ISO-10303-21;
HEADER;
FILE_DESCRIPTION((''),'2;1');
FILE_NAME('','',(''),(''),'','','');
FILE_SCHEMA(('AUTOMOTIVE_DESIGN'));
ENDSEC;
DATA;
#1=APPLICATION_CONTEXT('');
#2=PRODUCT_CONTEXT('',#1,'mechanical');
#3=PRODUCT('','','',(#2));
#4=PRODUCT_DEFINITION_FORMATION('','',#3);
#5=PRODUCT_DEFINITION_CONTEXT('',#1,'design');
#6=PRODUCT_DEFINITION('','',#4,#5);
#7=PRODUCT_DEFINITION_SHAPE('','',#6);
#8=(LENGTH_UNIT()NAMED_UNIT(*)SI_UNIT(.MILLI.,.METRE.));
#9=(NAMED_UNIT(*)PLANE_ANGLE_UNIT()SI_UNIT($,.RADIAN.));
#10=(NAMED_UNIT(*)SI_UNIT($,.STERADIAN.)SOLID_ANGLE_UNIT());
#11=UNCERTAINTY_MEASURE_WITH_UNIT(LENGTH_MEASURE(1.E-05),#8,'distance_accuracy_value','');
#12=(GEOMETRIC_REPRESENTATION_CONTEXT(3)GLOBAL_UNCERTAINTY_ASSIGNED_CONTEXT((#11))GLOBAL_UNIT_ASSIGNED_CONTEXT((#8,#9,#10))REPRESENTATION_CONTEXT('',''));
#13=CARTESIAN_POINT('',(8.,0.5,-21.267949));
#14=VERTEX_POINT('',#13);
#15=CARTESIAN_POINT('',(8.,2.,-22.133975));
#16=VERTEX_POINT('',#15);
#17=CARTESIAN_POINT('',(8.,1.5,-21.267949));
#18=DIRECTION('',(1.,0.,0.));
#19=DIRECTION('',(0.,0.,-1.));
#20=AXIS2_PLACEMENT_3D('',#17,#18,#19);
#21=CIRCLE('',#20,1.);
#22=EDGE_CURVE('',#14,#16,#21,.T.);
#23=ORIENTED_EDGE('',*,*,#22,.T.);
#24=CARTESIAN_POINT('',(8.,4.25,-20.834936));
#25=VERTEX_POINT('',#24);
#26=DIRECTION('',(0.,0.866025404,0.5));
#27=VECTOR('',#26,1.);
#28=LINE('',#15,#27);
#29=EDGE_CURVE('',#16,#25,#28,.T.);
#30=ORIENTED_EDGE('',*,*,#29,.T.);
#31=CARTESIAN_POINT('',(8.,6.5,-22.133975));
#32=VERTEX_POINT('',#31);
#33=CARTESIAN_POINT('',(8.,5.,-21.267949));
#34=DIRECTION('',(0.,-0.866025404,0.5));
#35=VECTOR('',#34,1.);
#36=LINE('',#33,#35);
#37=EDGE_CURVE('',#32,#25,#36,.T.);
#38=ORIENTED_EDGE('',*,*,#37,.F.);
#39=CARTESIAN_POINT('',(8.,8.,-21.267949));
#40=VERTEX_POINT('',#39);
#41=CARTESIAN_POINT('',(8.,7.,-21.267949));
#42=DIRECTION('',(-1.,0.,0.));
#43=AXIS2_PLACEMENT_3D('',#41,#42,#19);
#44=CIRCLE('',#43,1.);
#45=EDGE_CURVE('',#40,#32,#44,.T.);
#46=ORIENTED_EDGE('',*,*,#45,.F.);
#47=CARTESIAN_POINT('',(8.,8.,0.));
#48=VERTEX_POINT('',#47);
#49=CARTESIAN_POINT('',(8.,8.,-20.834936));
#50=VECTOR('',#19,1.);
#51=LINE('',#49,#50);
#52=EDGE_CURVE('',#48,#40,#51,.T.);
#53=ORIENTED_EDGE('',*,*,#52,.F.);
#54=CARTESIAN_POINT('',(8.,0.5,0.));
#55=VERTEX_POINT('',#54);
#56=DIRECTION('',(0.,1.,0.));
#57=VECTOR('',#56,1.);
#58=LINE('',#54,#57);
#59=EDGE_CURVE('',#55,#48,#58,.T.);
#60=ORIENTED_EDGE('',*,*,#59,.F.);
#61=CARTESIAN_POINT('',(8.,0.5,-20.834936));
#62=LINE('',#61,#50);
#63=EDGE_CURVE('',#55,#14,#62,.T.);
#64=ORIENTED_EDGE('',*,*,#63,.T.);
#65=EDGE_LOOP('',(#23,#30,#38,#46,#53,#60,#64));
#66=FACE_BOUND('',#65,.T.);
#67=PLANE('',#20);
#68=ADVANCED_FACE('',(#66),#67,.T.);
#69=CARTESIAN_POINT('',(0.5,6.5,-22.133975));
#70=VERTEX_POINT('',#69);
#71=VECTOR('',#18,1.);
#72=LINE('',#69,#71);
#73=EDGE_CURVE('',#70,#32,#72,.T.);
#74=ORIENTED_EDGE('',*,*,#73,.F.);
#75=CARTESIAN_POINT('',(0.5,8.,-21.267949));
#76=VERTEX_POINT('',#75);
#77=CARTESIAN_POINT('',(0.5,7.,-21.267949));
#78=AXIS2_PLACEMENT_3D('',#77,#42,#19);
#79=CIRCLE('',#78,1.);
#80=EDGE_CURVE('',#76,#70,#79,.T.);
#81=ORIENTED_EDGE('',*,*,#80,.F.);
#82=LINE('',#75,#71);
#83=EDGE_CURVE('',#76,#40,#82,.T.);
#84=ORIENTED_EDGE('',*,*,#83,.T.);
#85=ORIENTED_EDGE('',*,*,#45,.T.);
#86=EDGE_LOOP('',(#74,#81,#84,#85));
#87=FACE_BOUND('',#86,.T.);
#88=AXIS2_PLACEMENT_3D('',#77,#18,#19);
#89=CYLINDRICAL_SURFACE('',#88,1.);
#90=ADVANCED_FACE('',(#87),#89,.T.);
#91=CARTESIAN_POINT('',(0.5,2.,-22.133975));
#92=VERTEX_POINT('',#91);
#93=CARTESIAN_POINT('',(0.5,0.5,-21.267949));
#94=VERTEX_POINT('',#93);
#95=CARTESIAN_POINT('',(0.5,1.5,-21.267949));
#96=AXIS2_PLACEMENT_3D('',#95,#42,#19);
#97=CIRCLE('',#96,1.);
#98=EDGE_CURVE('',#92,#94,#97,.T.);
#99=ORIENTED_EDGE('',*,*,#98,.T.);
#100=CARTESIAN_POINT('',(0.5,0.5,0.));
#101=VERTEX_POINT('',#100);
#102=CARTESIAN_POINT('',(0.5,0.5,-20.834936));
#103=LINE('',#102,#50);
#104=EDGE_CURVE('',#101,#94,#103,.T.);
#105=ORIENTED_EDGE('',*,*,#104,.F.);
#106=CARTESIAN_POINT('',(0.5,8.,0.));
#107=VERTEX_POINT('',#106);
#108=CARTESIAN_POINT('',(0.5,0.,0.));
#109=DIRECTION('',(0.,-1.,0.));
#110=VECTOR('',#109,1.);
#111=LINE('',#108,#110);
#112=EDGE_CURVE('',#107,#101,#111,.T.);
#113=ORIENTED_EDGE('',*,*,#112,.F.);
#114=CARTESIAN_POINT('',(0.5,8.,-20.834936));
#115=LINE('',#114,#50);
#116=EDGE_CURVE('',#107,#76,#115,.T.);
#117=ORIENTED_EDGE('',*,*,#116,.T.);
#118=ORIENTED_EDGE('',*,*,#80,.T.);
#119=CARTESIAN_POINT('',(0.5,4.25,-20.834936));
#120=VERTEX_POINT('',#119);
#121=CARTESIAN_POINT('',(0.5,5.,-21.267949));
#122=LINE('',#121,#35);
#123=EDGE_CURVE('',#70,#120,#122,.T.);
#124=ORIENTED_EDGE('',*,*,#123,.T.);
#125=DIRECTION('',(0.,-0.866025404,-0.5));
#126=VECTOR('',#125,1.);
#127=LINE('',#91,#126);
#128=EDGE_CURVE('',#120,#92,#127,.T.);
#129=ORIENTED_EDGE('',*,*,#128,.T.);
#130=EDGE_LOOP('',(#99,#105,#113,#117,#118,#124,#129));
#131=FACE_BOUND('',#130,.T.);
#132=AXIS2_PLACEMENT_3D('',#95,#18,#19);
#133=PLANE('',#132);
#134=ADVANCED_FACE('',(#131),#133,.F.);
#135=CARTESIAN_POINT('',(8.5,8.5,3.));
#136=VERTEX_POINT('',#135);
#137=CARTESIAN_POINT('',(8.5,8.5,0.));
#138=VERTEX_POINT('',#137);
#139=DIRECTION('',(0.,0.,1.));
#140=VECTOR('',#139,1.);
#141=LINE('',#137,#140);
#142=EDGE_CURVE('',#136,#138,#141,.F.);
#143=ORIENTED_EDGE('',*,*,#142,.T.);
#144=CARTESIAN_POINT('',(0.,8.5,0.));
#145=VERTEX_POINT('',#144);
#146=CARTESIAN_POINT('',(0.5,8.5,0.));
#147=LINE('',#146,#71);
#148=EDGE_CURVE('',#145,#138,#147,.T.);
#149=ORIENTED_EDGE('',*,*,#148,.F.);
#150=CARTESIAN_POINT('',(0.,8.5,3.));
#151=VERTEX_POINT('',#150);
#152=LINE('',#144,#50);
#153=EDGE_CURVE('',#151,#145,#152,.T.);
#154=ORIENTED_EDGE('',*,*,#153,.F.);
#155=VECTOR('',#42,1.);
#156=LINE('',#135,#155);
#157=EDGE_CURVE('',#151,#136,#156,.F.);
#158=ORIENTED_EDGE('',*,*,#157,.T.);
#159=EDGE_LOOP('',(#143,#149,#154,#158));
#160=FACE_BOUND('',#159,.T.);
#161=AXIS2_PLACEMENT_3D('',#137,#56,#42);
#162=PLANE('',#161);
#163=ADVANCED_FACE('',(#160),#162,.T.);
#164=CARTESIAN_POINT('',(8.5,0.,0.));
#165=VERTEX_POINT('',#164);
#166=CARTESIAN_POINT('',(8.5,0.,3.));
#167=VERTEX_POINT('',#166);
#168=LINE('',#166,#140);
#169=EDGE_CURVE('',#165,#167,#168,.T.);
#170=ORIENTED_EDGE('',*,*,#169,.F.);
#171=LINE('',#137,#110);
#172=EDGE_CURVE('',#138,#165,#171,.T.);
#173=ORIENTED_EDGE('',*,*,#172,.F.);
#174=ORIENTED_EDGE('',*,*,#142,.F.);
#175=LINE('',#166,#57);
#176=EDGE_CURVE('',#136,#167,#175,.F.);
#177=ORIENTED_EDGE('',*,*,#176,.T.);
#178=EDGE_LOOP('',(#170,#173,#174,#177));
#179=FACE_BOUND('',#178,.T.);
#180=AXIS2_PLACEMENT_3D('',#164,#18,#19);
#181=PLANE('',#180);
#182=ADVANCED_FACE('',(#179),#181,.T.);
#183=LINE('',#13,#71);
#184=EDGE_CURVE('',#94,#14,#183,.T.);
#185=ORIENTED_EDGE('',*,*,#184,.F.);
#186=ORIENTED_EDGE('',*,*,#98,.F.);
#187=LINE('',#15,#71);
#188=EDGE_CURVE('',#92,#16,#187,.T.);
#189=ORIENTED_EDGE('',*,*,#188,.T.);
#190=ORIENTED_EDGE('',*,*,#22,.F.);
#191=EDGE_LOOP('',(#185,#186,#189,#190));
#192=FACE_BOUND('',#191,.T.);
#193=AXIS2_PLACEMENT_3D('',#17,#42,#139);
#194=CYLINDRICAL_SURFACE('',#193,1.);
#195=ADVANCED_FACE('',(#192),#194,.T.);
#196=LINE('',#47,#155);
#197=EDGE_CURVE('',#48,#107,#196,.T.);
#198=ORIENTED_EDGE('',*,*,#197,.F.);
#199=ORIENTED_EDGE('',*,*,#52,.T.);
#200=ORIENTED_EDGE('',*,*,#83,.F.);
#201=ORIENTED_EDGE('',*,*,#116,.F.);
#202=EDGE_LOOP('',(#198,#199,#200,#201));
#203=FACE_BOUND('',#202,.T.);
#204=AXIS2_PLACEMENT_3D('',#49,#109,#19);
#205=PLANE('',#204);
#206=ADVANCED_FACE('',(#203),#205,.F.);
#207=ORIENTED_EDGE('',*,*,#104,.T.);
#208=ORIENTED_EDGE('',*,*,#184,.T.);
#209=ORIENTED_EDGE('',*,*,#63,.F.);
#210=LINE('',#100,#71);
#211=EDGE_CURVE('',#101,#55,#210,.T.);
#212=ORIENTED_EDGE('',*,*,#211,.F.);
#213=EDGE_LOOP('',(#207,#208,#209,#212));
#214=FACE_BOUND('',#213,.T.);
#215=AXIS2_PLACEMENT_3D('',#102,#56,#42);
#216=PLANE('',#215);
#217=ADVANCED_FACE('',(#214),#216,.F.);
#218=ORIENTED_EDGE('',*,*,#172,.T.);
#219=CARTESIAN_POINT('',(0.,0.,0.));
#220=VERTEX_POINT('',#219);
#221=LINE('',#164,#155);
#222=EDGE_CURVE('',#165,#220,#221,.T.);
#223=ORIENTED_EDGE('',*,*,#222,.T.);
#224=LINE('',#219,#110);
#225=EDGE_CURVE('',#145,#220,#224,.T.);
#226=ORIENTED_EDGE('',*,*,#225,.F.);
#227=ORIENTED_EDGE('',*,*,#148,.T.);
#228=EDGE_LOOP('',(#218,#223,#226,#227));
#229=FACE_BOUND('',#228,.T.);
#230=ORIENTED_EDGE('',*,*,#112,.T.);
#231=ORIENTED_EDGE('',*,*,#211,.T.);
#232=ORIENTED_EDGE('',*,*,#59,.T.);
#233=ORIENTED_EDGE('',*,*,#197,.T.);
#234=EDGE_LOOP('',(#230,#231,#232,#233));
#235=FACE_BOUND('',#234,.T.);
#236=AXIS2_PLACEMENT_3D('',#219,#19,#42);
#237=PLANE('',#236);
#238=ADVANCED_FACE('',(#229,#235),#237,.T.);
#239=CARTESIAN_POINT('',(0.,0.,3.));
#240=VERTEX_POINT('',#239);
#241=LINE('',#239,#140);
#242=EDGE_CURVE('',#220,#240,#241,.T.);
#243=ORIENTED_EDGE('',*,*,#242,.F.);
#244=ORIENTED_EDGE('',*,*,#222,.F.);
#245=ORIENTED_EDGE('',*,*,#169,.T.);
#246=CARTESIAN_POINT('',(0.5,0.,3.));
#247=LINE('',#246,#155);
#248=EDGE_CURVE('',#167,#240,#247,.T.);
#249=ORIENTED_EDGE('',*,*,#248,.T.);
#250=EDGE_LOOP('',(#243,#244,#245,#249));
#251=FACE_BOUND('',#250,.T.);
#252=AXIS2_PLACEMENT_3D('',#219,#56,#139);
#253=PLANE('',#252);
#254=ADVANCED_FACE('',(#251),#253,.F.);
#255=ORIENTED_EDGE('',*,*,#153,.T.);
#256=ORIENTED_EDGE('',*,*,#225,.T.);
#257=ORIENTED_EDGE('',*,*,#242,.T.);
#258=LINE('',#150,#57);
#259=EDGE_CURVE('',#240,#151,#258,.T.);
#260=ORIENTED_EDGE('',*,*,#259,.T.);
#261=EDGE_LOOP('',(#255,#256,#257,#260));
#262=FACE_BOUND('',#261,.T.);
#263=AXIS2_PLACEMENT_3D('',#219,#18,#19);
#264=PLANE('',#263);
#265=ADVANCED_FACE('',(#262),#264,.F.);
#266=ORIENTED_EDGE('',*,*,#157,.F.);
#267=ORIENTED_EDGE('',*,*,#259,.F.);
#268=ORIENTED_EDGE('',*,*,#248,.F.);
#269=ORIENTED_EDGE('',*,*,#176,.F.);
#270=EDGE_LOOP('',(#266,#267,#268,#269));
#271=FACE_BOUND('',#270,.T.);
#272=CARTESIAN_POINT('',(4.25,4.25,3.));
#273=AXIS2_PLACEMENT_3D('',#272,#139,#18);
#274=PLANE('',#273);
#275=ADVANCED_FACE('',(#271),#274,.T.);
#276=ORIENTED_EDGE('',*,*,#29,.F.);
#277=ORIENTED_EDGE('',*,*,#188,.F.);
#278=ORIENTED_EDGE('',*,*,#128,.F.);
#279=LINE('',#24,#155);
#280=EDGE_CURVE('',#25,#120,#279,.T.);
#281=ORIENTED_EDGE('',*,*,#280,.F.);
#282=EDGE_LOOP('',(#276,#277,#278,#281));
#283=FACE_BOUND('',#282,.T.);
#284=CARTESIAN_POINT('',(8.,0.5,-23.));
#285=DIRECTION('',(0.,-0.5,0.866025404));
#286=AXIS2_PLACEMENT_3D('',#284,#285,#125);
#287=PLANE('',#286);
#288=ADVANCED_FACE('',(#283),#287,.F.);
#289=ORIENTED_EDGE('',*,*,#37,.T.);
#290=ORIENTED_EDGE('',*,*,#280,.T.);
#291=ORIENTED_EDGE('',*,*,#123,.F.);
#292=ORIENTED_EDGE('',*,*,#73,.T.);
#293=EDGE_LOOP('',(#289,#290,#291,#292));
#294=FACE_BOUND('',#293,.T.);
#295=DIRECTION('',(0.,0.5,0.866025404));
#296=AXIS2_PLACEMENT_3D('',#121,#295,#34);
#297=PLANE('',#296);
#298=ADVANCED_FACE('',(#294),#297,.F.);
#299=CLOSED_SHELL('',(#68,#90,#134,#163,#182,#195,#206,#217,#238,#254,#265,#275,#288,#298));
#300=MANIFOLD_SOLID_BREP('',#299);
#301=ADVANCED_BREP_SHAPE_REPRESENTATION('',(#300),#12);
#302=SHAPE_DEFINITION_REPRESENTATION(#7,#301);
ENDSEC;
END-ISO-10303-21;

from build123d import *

# Parameters (mm, degrees)
BOSS_EXTRUDE1_START   = -0.5
BOSS_EXTRUDE1_DEPTH   = 8
BOSS_EXTRUDE1_2_DEPTH = 7.5
CUT_EXTRUDE1_DEPTH    = 0.5
SKETCH3_W             = 8
SKETCH3_H             = 24.267949192
BOSS_EXTRUDE2_DEPTH   = 0.5
CUT_EXTRUDE2_DEPTH    = 7.5
CUT_EXTRUDE3_DEPTH    = 0.433012702
CUT_EXTRUDE4_DEPTH    = 20.834936491
SKETCH7_W             = 3
SKETCH7_H             = 8.5
BOSS_EXTRUDE3_DEPTH   = 0.5


with BuildPart() as part:
    # Boss-Extrude1: read off the stored shape, not the designer's step
    # Boss-Extrude1 outline → Boss-Extrude1 (new body)
    with BuildSketch(Plane.ZY.offset(-8).offset(BOSS_EXTRUDE1_START)):
        with BuildLine():
            Line((-21.267949192, 8.5), (-21.267949192, 3.5))
            Line((-21.267949192, 3.5), (-22.133974596, 2))
            ThreePointArc((-22.133974596, 2), (-22.133974596, 1), (-21.267949192, 0.5))
            Line((-21.267949192, 0.5), (3, 0.5))
            Line((3, 0.5), (3, 8.5))
            Line((3, 8.5), (-21.267949192, 8.5))
        make_face()
    extrude(amount=BOSS_EXTRUDE1_DEPTH)

    # Boss-Extrude1 2 outline → Boss-Extrude1 2 (add)
    with BuildSketch(Plane.ZY.offset(-8)):
        with BuildLine():
            Line((-22.133974596, 6.5), (-21.267949192, 5))
            Line((-21.267949192, 5), (-21.267949192, 8))
            ThreePointArc((-21.267949192, 8), (-22.133974596, 7.5), (-22.133974596, 6.5))
        make_face()
    extrude(amount=BOSS_EXTRUDE1_2_DEPTH)

    # Sketch2 → Cut-Extrude1 (cut)
    with BuildSketch(Plane(origin=(8.5, 0, 0), x_dir=(0, 0, -1), z_dir=(1, 0, 0))):
        with BuildLine():
            Line((22.133974596, 2), (21.267949192, 3.5))
            Line((21.267949192, 3.5), (21.267949192, 0.5))
            ThreePointArc((21.267949192, 0.5), (22.133974596, 1), (22.133974596, 2))
        make_face()
    extrude(amount=-CUT_EXTRUDE1_DEPTH, mode=Mode.SUBTRACT)

    # Sketch3 → Boss-Extrude2 (add)
    with BuildSketch(Plane.XZ.offset(-0.5)):
        with Locations((4.5, -9.133974596)):
            Rectangle(SKETCH3_W, SKETCH3_H)
    extrude(amount=BOSS_EXTRUDE2_DEPTH)

    # Sketch4 → Cut-Extrude2 (cut)
    with BuildSketch(Plane.ZY.offset(-0.5)):
        Polygon((-21.267949192, 3.5), (-20.834936491, 4.25), (-21.267949192, 5), align=None)
    extrude(amount=-CUT_EXTRUDE2_DEPTH, mode=Mode.SUBTRACT)

    # Sketch5 → Cut-Extrude3 (cut)
    with BuildSketch(Plane(origin=(0, 0, -21.267949192), x_dir=(-1, 0, 0), z_dir=(0, 0, -1))):
        Polygon((-0.5, 8), (-0.5, 8.5), (-8.5, 8.5), (-8.5, 0), (-0.5, 0), (-0.5, 0.5), (-8, 0.5), (-8, 4.25), (-8, 8), align=None)
    extrude(amount=-CUT_EXTRUDE3_DEPTH, mode=Mode.SUBTRACT)

    # Sketch6 → Cut-Extrude4 (cut)
    with BuildSketch(Plane(origin=(0, 0, -20.834936491), x_dir=(-1, 0, 0), z_dir=(0, 0, -1))):
        Polygon((-0.5, 8), (-0.5, 8.5), (-8.5, 8.5), (-8.5, 0), (-0.5, 0), (-0.5, 0.5), (-8, 0.5), (-8, 8), align=None)
    extrude(amount=-CUT_EXTRUDE4_DEPTH, mode=Mode.SUBTRACT)

    # Sketch7 → Boss-Extrude3 (add)
    with BuildSketch(Plane.ZY.offset(-0.5)):
        with Locations((1.5, 4.25)):
            Rectangle(SKETCH7_W, SKETCH7_H)
    extrude(amount=BOSS_EXTRUDE3_DEPTH)


solid = part.part
